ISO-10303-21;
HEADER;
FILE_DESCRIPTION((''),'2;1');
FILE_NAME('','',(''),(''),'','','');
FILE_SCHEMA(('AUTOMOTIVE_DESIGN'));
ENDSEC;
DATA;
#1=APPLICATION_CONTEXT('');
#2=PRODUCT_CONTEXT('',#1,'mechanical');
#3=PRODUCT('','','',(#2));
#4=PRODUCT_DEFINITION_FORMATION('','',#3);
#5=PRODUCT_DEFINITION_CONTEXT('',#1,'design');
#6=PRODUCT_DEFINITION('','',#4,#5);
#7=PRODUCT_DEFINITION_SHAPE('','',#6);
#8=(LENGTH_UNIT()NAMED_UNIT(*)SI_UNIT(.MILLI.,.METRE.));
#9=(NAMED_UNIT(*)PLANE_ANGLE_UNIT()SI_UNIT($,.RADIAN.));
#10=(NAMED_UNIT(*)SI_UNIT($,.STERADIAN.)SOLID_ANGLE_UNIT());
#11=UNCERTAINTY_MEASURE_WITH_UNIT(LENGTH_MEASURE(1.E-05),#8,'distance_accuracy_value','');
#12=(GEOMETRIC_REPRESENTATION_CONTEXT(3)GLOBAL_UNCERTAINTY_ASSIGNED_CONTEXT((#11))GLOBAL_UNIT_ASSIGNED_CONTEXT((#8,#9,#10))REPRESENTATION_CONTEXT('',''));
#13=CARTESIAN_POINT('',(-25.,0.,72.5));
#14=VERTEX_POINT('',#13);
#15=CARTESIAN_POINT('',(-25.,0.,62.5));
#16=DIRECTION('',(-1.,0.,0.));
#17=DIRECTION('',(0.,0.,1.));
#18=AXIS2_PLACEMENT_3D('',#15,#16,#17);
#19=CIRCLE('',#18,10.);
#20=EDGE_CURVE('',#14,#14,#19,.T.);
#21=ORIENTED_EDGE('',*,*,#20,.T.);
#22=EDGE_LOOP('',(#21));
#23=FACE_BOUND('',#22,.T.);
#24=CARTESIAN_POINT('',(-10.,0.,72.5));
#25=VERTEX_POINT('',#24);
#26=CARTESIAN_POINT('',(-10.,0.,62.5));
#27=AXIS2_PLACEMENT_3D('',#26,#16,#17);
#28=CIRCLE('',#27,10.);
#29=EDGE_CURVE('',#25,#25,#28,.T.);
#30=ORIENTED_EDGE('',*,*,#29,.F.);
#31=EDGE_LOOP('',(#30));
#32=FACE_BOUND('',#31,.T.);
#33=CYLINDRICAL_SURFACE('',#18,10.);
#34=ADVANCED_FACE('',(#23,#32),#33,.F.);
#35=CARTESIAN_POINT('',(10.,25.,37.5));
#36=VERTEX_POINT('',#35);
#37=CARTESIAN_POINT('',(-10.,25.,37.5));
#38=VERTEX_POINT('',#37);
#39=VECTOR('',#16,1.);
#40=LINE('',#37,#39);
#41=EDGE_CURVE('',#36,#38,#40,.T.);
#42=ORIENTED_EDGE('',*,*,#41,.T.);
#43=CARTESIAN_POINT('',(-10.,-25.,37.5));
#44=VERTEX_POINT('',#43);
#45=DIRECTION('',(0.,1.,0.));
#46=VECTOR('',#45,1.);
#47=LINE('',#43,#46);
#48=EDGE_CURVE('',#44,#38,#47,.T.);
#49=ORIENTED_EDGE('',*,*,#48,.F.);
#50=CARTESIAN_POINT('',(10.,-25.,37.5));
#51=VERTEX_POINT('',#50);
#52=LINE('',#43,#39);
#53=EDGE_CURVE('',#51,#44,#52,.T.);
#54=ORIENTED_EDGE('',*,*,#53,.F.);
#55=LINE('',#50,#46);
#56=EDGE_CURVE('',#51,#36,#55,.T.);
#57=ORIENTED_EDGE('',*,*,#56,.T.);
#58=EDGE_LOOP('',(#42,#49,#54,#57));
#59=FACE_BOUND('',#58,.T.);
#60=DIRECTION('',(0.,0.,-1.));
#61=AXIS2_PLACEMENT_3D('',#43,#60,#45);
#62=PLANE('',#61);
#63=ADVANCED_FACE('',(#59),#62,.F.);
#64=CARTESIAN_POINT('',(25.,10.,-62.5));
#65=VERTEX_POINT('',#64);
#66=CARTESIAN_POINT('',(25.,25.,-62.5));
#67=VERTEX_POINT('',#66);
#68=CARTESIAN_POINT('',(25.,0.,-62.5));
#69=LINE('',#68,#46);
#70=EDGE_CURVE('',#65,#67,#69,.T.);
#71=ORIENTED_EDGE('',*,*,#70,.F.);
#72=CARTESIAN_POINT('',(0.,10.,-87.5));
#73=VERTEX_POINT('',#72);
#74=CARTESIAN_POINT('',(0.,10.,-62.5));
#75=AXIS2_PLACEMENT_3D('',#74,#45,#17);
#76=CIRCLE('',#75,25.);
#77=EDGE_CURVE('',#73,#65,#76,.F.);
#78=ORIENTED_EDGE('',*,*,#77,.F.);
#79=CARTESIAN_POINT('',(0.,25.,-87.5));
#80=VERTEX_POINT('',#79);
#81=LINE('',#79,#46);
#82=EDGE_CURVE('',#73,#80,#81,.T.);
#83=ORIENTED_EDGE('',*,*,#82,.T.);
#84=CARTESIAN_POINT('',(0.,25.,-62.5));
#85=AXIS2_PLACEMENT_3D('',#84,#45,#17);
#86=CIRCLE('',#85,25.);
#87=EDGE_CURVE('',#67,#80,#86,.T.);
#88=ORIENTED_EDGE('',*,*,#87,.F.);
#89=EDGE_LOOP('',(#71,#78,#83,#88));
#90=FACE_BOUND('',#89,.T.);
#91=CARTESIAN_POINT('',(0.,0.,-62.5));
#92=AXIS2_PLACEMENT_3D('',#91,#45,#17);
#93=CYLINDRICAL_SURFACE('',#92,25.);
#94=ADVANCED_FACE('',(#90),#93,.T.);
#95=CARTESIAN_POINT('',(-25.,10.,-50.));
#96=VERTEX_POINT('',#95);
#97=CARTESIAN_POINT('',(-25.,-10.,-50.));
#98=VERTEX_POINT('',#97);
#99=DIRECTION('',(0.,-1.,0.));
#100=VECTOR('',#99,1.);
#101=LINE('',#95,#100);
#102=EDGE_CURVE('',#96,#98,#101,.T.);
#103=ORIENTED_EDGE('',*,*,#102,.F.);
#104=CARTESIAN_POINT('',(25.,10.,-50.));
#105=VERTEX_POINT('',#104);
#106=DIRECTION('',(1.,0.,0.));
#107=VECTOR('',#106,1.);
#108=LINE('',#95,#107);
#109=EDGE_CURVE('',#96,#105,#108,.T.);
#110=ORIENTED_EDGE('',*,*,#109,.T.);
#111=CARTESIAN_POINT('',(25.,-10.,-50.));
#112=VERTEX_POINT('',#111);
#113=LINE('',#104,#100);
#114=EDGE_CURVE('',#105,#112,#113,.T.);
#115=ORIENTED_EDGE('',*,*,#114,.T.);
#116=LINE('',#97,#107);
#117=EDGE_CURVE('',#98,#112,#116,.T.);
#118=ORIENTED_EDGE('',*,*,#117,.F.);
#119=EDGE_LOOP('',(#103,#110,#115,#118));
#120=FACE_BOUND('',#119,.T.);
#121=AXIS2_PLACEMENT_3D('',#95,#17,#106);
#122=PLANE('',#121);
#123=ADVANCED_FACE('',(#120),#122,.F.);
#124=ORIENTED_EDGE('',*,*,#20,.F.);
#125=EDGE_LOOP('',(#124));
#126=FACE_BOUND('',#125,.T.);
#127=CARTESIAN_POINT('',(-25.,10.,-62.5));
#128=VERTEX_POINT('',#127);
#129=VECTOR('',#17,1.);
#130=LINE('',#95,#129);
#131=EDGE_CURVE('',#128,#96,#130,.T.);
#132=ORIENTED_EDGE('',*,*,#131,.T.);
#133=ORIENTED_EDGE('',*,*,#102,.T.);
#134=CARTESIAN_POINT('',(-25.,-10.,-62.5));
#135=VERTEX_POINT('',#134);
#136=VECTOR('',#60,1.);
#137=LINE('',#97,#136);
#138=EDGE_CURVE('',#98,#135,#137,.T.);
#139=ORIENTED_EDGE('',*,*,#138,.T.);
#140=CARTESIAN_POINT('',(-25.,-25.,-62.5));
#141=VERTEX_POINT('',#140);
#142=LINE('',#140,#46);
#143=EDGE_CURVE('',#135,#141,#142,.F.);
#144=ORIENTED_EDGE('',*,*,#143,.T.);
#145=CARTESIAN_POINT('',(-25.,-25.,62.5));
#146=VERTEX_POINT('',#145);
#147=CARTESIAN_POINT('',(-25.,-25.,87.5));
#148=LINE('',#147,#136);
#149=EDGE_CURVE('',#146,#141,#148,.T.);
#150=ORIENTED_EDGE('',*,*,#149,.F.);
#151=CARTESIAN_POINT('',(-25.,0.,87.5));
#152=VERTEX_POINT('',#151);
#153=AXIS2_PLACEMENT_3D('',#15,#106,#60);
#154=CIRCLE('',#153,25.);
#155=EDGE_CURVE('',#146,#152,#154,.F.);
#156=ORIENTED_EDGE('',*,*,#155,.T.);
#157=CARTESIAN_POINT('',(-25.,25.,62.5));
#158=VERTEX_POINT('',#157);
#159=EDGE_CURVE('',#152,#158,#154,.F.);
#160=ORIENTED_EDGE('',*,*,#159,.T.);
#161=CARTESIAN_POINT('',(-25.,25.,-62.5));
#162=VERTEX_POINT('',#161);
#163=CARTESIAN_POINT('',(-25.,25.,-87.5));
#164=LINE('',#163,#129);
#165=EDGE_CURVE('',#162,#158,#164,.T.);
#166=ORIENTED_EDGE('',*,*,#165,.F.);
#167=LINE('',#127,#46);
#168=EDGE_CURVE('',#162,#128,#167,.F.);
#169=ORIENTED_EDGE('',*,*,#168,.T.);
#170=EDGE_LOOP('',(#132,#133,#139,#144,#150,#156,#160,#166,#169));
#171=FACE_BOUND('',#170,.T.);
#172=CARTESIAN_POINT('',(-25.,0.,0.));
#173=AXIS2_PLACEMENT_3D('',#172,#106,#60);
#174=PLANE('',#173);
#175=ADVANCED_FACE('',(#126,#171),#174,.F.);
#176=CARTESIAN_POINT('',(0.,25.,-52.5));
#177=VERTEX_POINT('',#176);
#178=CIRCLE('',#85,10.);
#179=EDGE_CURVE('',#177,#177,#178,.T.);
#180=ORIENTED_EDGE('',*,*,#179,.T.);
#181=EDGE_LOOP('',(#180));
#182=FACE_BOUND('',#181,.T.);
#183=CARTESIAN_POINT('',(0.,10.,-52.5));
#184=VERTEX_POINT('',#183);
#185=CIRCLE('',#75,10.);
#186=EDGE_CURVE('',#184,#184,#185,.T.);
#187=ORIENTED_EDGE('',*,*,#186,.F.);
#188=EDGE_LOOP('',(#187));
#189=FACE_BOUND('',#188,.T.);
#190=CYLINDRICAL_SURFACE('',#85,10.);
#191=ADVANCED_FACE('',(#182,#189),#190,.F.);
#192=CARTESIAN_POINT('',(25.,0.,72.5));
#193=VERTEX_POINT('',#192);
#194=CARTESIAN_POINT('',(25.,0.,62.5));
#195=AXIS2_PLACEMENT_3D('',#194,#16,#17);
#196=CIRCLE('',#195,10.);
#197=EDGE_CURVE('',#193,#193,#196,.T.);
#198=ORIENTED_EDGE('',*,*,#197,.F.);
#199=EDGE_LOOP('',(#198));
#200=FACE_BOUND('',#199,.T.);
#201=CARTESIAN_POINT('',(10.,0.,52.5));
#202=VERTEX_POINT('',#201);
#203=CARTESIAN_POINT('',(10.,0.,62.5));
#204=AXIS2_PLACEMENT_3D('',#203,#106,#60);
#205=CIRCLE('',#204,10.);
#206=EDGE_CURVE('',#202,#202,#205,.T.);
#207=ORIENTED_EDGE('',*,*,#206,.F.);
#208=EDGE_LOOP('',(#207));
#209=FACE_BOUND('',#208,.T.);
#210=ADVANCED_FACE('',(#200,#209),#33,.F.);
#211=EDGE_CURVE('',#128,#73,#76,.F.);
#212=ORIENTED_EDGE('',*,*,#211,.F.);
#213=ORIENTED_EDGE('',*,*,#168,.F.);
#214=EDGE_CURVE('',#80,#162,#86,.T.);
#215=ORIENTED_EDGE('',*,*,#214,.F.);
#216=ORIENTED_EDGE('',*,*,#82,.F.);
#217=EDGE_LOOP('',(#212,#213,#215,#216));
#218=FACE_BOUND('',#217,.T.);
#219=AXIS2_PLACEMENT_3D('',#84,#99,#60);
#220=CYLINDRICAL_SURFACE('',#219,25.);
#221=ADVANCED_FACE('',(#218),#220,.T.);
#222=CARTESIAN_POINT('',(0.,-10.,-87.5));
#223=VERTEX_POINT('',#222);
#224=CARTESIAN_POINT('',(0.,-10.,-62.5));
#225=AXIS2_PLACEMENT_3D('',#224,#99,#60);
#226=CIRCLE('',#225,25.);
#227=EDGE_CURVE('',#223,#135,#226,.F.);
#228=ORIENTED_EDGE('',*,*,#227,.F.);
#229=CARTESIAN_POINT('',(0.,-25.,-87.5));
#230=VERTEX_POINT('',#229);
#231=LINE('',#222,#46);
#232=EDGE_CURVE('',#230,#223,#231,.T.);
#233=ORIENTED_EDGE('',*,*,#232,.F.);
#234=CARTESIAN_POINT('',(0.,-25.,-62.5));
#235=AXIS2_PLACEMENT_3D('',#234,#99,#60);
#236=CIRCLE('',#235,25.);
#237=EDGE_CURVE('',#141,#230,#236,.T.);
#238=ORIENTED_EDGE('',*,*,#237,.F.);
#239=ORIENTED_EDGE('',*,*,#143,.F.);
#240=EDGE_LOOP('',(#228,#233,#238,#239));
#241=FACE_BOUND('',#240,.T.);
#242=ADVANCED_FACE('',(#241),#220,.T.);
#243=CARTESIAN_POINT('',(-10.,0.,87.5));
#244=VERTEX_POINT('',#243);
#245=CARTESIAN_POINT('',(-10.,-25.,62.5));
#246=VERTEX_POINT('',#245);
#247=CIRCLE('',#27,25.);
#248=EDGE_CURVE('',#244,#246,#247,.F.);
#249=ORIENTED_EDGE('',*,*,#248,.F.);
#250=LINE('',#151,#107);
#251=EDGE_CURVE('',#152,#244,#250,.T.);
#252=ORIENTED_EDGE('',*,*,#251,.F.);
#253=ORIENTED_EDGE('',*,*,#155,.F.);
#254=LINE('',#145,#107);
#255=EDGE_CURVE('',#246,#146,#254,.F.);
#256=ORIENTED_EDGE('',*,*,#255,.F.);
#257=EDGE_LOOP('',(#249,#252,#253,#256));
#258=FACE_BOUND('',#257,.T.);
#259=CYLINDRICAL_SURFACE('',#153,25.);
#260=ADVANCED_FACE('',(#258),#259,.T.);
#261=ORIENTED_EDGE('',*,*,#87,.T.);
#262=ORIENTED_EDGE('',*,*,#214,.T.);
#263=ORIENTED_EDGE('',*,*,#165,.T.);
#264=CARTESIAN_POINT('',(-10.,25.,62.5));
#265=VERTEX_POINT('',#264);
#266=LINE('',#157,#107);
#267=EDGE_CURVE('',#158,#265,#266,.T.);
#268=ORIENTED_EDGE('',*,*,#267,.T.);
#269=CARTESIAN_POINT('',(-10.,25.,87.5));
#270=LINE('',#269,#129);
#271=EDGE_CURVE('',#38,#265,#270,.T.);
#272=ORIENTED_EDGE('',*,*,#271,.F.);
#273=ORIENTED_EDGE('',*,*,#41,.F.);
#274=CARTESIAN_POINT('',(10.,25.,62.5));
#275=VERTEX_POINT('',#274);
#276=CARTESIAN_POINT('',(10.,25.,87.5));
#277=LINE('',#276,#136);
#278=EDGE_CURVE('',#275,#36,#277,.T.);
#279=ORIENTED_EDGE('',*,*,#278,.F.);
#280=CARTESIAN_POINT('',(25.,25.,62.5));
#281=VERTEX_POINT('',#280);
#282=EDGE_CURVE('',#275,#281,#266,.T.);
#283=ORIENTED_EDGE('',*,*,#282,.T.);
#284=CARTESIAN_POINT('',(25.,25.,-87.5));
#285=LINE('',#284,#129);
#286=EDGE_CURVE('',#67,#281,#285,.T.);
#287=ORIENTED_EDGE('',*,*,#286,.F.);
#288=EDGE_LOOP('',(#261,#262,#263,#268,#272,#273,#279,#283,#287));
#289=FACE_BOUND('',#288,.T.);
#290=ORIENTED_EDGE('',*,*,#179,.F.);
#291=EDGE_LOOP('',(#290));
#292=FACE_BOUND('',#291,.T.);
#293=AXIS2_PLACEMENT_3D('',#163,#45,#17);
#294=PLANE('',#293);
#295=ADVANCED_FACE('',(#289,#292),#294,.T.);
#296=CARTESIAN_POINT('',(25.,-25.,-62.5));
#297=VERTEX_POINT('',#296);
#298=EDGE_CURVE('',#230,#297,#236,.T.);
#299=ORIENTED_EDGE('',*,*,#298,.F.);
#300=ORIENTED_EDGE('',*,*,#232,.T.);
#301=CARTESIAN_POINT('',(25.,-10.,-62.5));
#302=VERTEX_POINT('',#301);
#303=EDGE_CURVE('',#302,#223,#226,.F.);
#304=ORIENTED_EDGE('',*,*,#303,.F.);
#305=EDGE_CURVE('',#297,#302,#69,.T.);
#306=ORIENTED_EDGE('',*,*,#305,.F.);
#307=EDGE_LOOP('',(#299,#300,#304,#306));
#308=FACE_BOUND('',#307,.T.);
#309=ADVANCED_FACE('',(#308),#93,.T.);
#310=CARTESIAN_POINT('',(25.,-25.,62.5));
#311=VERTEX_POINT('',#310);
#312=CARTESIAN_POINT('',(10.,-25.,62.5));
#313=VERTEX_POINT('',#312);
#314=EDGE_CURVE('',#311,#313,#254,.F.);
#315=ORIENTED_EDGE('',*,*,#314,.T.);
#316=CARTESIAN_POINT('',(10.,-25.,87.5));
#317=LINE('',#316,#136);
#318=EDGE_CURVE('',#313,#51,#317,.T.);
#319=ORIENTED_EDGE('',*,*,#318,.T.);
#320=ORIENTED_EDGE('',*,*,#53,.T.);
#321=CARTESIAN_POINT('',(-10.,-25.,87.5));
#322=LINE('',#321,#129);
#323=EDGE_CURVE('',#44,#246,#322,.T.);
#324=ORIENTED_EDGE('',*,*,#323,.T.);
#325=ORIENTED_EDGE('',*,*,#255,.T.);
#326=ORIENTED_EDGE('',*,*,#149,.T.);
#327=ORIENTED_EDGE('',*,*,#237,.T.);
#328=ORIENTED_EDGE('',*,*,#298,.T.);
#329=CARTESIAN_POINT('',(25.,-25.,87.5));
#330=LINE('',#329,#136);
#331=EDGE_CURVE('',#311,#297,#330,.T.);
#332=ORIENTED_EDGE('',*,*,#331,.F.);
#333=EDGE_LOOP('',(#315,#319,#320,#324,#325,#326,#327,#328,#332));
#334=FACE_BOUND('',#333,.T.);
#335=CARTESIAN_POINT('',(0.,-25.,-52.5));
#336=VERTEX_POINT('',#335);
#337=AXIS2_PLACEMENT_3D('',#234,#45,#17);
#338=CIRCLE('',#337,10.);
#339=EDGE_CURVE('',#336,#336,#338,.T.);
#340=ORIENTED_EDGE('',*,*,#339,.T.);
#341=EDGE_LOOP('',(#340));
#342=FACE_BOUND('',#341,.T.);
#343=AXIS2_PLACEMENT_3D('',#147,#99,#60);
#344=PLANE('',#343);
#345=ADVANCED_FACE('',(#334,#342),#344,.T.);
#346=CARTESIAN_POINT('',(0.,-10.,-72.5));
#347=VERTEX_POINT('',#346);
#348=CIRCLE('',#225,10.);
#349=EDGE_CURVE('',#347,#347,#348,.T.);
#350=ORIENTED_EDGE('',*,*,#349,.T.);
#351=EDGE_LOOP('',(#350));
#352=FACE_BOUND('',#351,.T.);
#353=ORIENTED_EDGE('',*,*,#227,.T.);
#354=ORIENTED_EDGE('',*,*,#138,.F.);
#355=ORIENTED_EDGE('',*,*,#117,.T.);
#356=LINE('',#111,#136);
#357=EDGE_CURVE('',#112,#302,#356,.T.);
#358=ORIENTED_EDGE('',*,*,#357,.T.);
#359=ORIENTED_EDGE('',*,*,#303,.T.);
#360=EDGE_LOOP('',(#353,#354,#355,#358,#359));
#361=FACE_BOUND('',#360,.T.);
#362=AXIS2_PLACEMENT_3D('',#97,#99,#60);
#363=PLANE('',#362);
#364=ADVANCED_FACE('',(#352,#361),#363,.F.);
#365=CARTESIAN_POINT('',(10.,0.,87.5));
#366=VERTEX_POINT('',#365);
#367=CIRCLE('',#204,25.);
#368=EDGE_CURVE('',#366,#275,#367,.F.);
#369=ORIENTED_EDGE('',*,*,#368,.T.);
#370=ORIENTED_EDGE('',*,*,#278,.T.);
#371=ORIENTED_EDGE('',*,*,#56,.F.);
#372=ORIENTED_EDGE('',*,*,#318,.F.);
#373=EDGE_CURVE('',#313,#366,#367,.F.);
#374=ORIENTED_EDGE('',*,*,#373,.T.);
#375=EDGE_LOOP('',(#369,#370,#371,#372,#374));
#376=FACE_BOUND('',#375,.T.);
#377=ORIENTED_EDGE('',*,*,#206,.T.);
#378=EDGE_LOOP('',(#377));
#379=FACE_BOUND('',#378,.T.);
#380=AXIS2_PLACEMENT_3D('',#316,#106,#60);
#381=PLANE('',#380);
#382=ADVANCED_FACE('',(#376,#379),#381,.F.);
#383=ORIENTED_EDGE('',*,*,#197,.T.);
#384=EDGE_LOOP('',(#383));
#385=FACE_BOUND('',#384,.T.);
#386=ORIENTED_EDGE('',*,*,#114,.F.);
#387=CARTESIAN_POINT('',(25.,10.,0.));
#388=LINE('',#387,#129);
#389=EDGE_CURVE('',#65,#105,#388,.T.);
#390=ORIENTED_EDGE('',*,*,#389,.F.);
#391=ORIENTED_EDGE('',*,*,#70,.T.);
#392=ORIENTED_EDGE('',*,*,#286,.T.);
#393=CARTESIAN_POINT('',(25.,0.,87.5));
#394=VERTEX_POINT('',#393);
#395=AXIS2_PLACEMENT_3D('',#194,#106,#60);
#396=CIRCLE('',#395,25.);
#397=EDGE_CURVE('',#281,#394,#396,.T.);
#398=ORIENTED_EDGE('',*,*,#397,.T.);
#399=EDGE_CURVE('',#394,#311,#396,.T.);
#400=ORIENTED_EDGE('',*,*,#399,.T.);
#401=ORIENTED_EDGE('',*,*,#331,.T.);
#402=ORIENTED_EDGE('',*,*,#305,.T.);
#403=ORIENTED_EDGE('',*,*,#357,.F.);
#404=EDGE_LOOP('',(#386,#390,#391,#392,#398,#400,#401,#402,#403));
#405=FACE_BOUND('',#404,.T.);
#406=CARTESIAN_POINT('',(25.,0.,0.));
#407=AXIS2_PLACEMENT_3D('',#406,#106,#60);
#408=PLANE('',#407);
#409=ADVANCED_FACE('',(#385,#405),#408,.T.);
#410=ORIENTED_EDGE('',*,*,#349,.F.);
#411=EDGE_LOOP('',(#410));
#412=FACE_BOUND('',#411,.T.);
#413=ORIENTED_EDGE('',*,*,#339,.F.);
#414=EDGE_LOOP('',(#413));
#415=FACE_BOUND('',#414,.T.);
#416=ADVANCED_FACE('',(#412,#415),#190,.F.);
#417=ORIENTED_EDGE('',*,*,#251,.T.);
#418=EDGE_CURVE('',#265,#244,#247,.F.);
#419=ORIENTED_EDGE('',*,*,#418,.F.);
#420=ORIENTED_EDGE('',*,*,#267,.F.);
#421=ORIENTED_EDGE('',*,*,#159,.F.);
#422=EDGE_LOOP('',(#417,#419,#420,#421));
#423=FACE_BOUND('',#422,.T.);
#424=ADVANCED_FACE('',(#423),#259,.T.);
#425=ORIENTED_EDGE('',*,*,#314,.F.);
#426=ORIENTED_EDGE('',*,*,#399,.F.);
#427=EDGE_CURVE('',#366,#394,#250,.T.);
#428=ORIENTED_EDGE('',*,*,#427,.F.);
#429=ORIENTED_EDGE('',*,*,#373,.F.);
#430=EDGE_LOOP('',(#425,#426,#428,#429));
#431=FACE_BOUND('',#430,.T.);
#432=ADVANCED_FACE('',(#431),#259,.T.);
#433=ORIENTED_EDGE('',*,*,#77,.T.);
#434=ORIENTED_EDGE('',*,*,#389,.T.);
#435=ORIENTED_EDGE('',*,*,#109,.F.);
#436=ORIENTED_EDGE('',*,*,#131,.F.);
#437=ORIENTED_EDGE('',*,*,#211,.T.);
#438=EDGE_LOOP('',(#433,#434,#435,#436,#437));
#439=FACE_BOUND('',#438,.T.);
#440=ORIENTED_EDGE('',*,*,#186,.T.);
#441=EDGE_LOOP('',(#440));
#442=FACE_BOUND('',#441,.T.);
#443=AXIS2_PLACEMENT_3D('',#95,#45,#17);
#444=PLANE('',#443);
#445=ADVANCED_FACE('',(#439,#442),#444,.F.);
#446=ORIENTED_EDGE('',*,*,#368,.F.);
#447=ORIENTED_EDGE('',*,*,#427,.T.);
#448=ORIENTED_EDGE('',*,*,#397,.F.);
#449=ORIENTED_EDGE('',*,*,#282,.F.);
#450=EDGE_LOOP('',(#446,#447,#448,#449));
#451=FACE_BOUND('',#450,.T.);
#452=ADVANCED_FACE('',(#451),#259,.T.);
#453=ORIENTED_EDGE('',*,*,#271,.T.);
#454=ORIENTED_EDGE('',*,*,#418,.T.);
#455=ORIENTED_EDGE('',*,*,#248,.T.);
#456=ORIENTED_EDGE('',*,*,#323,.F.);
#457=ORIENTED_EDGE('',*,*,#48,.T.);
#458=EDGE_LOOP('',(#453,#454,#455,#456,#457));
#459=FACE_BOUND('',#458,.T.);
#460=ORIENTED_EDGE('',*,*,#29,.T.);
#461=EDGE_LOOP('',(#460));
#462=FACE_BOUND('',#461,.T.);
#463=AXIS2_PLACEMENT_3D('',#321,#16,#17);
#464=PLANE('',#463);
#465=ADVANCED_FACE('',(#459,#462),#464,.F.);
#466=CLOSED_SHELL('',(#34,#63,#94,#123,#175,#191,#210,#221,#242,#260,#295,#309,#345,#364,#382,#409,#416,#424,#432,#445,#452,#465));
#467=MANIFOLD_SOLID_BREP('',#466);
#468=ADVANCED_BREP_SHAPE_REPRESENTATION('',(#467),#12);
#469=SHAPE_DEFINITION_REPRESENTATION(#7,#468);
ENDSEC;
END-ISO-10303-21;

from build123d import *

# Parameters (mm, degrees)
BOSS_EXTRUDE1_DEPTH      = 25
BOSS_EXTRUDE1_DEPTH_BACK = 25
SKETCH1_W                = 175
SKETCH1_H                = 50
SKETCH2_W                = 20
SKETCH2_H                = 50
CUT_EXTRUDE1_DEPTH       = 104.832798286
FILLET2_R                = 25
SKETCH3_W                = 56.175036023
SKETCH3_H                = 20
CUT_EXTRUDE2_DEPTH       = 104.832798286
FILLET6_R                = 25
HOLE1_D                  = 20
HOLE2_D                  = 20


with BuildPart() as part:
    # Sketch1 → Boss-Extrude1 (new, two sides: drawn at the far end of the back side and taken through both)
    with BuildSketch(Plane(origin=(0, 0, 0), x_dir=(0, 0, -1), z_dir=(1, 0, 0)).offset(-BOSS_EXTRUDE1_DEPTH_BACK)):
        Rectangle(SKETCH1_W, SKETCH1_H)
    extrude(amount=BOSS_EXTRUDE1_DEPTH + BOSS_EXTRUDE1_DEPTH_BACK)

    # Sketch2 → Cut-Extrude1 (cut, through all)
    with BuildSketch(Plane(origin=(0, 25, 0), x_dir=(1, 0, 0), z_dir=(0, 1, 0))):
        with Locations((0, -62.5)):
            Rectangle(SKETCH2_W, SKETCH2_H)
    extrude(amount=-CUT_EXTRUDE1_DEPTH, mode=Mode.SUBTRACT)

    # Fillet2
    fillet2_edges = [part.edges().sort_by_distance(p)[0] for p in [
        (-17.5, 25, 87.5),
        (17.5, 25, 87.5),
        (-17.5, -25, 87.5),
        (17.5, -25, 87.5),
    ]]
    fillet(fillet2_edges, radius=FILLET2_R - 0.0001)  # a hair under: the kernel refuses the full size

    # Sketch3 → Cut-Extrude2 (cut, through all)
    with BuildSketch(Plane(origin=(25, 0, 0), x_dir=(0, 0, -1), z_dir=(1, 0, 0))):
        with Locations((78.087518012, 0)):
            Rectangle(SKETCH3_W, SKETCH3_H)
    extrude(amount=-CUT_EXTRUDE2_DEPTH, mode=Mode.SUBTRACT)

    # Fillet6
    fillet6_edges = [part.edges().sort_by_distance(p)[0] for p in [
        (25, 17.5, -87.5),
        (25, -17.5, -87.5),
        (-25, -17.5, -87.5),
        (-25, 17.5, -87.5),
    ]]
    fillet(fillet6_edges, radius=FILLET6_R - 0.0001)  # a hair under: the kernel refuses the full size

    # Hole1 (through all)
    with Locations(Plane(origin=(0, 25, 0), x_dir=(1, 0, 0), z_dir=(0, 1, 0))):
        with Locations((0, 62.5)):
            Hole(HOLE1_D / 2)

    # Hole2 (through all)
    with Locations(Plane.ZY.offset(25)):
        with Locations((62.5, 0)):
            Hole(HOLE2_D / 2)


solid = part.part
